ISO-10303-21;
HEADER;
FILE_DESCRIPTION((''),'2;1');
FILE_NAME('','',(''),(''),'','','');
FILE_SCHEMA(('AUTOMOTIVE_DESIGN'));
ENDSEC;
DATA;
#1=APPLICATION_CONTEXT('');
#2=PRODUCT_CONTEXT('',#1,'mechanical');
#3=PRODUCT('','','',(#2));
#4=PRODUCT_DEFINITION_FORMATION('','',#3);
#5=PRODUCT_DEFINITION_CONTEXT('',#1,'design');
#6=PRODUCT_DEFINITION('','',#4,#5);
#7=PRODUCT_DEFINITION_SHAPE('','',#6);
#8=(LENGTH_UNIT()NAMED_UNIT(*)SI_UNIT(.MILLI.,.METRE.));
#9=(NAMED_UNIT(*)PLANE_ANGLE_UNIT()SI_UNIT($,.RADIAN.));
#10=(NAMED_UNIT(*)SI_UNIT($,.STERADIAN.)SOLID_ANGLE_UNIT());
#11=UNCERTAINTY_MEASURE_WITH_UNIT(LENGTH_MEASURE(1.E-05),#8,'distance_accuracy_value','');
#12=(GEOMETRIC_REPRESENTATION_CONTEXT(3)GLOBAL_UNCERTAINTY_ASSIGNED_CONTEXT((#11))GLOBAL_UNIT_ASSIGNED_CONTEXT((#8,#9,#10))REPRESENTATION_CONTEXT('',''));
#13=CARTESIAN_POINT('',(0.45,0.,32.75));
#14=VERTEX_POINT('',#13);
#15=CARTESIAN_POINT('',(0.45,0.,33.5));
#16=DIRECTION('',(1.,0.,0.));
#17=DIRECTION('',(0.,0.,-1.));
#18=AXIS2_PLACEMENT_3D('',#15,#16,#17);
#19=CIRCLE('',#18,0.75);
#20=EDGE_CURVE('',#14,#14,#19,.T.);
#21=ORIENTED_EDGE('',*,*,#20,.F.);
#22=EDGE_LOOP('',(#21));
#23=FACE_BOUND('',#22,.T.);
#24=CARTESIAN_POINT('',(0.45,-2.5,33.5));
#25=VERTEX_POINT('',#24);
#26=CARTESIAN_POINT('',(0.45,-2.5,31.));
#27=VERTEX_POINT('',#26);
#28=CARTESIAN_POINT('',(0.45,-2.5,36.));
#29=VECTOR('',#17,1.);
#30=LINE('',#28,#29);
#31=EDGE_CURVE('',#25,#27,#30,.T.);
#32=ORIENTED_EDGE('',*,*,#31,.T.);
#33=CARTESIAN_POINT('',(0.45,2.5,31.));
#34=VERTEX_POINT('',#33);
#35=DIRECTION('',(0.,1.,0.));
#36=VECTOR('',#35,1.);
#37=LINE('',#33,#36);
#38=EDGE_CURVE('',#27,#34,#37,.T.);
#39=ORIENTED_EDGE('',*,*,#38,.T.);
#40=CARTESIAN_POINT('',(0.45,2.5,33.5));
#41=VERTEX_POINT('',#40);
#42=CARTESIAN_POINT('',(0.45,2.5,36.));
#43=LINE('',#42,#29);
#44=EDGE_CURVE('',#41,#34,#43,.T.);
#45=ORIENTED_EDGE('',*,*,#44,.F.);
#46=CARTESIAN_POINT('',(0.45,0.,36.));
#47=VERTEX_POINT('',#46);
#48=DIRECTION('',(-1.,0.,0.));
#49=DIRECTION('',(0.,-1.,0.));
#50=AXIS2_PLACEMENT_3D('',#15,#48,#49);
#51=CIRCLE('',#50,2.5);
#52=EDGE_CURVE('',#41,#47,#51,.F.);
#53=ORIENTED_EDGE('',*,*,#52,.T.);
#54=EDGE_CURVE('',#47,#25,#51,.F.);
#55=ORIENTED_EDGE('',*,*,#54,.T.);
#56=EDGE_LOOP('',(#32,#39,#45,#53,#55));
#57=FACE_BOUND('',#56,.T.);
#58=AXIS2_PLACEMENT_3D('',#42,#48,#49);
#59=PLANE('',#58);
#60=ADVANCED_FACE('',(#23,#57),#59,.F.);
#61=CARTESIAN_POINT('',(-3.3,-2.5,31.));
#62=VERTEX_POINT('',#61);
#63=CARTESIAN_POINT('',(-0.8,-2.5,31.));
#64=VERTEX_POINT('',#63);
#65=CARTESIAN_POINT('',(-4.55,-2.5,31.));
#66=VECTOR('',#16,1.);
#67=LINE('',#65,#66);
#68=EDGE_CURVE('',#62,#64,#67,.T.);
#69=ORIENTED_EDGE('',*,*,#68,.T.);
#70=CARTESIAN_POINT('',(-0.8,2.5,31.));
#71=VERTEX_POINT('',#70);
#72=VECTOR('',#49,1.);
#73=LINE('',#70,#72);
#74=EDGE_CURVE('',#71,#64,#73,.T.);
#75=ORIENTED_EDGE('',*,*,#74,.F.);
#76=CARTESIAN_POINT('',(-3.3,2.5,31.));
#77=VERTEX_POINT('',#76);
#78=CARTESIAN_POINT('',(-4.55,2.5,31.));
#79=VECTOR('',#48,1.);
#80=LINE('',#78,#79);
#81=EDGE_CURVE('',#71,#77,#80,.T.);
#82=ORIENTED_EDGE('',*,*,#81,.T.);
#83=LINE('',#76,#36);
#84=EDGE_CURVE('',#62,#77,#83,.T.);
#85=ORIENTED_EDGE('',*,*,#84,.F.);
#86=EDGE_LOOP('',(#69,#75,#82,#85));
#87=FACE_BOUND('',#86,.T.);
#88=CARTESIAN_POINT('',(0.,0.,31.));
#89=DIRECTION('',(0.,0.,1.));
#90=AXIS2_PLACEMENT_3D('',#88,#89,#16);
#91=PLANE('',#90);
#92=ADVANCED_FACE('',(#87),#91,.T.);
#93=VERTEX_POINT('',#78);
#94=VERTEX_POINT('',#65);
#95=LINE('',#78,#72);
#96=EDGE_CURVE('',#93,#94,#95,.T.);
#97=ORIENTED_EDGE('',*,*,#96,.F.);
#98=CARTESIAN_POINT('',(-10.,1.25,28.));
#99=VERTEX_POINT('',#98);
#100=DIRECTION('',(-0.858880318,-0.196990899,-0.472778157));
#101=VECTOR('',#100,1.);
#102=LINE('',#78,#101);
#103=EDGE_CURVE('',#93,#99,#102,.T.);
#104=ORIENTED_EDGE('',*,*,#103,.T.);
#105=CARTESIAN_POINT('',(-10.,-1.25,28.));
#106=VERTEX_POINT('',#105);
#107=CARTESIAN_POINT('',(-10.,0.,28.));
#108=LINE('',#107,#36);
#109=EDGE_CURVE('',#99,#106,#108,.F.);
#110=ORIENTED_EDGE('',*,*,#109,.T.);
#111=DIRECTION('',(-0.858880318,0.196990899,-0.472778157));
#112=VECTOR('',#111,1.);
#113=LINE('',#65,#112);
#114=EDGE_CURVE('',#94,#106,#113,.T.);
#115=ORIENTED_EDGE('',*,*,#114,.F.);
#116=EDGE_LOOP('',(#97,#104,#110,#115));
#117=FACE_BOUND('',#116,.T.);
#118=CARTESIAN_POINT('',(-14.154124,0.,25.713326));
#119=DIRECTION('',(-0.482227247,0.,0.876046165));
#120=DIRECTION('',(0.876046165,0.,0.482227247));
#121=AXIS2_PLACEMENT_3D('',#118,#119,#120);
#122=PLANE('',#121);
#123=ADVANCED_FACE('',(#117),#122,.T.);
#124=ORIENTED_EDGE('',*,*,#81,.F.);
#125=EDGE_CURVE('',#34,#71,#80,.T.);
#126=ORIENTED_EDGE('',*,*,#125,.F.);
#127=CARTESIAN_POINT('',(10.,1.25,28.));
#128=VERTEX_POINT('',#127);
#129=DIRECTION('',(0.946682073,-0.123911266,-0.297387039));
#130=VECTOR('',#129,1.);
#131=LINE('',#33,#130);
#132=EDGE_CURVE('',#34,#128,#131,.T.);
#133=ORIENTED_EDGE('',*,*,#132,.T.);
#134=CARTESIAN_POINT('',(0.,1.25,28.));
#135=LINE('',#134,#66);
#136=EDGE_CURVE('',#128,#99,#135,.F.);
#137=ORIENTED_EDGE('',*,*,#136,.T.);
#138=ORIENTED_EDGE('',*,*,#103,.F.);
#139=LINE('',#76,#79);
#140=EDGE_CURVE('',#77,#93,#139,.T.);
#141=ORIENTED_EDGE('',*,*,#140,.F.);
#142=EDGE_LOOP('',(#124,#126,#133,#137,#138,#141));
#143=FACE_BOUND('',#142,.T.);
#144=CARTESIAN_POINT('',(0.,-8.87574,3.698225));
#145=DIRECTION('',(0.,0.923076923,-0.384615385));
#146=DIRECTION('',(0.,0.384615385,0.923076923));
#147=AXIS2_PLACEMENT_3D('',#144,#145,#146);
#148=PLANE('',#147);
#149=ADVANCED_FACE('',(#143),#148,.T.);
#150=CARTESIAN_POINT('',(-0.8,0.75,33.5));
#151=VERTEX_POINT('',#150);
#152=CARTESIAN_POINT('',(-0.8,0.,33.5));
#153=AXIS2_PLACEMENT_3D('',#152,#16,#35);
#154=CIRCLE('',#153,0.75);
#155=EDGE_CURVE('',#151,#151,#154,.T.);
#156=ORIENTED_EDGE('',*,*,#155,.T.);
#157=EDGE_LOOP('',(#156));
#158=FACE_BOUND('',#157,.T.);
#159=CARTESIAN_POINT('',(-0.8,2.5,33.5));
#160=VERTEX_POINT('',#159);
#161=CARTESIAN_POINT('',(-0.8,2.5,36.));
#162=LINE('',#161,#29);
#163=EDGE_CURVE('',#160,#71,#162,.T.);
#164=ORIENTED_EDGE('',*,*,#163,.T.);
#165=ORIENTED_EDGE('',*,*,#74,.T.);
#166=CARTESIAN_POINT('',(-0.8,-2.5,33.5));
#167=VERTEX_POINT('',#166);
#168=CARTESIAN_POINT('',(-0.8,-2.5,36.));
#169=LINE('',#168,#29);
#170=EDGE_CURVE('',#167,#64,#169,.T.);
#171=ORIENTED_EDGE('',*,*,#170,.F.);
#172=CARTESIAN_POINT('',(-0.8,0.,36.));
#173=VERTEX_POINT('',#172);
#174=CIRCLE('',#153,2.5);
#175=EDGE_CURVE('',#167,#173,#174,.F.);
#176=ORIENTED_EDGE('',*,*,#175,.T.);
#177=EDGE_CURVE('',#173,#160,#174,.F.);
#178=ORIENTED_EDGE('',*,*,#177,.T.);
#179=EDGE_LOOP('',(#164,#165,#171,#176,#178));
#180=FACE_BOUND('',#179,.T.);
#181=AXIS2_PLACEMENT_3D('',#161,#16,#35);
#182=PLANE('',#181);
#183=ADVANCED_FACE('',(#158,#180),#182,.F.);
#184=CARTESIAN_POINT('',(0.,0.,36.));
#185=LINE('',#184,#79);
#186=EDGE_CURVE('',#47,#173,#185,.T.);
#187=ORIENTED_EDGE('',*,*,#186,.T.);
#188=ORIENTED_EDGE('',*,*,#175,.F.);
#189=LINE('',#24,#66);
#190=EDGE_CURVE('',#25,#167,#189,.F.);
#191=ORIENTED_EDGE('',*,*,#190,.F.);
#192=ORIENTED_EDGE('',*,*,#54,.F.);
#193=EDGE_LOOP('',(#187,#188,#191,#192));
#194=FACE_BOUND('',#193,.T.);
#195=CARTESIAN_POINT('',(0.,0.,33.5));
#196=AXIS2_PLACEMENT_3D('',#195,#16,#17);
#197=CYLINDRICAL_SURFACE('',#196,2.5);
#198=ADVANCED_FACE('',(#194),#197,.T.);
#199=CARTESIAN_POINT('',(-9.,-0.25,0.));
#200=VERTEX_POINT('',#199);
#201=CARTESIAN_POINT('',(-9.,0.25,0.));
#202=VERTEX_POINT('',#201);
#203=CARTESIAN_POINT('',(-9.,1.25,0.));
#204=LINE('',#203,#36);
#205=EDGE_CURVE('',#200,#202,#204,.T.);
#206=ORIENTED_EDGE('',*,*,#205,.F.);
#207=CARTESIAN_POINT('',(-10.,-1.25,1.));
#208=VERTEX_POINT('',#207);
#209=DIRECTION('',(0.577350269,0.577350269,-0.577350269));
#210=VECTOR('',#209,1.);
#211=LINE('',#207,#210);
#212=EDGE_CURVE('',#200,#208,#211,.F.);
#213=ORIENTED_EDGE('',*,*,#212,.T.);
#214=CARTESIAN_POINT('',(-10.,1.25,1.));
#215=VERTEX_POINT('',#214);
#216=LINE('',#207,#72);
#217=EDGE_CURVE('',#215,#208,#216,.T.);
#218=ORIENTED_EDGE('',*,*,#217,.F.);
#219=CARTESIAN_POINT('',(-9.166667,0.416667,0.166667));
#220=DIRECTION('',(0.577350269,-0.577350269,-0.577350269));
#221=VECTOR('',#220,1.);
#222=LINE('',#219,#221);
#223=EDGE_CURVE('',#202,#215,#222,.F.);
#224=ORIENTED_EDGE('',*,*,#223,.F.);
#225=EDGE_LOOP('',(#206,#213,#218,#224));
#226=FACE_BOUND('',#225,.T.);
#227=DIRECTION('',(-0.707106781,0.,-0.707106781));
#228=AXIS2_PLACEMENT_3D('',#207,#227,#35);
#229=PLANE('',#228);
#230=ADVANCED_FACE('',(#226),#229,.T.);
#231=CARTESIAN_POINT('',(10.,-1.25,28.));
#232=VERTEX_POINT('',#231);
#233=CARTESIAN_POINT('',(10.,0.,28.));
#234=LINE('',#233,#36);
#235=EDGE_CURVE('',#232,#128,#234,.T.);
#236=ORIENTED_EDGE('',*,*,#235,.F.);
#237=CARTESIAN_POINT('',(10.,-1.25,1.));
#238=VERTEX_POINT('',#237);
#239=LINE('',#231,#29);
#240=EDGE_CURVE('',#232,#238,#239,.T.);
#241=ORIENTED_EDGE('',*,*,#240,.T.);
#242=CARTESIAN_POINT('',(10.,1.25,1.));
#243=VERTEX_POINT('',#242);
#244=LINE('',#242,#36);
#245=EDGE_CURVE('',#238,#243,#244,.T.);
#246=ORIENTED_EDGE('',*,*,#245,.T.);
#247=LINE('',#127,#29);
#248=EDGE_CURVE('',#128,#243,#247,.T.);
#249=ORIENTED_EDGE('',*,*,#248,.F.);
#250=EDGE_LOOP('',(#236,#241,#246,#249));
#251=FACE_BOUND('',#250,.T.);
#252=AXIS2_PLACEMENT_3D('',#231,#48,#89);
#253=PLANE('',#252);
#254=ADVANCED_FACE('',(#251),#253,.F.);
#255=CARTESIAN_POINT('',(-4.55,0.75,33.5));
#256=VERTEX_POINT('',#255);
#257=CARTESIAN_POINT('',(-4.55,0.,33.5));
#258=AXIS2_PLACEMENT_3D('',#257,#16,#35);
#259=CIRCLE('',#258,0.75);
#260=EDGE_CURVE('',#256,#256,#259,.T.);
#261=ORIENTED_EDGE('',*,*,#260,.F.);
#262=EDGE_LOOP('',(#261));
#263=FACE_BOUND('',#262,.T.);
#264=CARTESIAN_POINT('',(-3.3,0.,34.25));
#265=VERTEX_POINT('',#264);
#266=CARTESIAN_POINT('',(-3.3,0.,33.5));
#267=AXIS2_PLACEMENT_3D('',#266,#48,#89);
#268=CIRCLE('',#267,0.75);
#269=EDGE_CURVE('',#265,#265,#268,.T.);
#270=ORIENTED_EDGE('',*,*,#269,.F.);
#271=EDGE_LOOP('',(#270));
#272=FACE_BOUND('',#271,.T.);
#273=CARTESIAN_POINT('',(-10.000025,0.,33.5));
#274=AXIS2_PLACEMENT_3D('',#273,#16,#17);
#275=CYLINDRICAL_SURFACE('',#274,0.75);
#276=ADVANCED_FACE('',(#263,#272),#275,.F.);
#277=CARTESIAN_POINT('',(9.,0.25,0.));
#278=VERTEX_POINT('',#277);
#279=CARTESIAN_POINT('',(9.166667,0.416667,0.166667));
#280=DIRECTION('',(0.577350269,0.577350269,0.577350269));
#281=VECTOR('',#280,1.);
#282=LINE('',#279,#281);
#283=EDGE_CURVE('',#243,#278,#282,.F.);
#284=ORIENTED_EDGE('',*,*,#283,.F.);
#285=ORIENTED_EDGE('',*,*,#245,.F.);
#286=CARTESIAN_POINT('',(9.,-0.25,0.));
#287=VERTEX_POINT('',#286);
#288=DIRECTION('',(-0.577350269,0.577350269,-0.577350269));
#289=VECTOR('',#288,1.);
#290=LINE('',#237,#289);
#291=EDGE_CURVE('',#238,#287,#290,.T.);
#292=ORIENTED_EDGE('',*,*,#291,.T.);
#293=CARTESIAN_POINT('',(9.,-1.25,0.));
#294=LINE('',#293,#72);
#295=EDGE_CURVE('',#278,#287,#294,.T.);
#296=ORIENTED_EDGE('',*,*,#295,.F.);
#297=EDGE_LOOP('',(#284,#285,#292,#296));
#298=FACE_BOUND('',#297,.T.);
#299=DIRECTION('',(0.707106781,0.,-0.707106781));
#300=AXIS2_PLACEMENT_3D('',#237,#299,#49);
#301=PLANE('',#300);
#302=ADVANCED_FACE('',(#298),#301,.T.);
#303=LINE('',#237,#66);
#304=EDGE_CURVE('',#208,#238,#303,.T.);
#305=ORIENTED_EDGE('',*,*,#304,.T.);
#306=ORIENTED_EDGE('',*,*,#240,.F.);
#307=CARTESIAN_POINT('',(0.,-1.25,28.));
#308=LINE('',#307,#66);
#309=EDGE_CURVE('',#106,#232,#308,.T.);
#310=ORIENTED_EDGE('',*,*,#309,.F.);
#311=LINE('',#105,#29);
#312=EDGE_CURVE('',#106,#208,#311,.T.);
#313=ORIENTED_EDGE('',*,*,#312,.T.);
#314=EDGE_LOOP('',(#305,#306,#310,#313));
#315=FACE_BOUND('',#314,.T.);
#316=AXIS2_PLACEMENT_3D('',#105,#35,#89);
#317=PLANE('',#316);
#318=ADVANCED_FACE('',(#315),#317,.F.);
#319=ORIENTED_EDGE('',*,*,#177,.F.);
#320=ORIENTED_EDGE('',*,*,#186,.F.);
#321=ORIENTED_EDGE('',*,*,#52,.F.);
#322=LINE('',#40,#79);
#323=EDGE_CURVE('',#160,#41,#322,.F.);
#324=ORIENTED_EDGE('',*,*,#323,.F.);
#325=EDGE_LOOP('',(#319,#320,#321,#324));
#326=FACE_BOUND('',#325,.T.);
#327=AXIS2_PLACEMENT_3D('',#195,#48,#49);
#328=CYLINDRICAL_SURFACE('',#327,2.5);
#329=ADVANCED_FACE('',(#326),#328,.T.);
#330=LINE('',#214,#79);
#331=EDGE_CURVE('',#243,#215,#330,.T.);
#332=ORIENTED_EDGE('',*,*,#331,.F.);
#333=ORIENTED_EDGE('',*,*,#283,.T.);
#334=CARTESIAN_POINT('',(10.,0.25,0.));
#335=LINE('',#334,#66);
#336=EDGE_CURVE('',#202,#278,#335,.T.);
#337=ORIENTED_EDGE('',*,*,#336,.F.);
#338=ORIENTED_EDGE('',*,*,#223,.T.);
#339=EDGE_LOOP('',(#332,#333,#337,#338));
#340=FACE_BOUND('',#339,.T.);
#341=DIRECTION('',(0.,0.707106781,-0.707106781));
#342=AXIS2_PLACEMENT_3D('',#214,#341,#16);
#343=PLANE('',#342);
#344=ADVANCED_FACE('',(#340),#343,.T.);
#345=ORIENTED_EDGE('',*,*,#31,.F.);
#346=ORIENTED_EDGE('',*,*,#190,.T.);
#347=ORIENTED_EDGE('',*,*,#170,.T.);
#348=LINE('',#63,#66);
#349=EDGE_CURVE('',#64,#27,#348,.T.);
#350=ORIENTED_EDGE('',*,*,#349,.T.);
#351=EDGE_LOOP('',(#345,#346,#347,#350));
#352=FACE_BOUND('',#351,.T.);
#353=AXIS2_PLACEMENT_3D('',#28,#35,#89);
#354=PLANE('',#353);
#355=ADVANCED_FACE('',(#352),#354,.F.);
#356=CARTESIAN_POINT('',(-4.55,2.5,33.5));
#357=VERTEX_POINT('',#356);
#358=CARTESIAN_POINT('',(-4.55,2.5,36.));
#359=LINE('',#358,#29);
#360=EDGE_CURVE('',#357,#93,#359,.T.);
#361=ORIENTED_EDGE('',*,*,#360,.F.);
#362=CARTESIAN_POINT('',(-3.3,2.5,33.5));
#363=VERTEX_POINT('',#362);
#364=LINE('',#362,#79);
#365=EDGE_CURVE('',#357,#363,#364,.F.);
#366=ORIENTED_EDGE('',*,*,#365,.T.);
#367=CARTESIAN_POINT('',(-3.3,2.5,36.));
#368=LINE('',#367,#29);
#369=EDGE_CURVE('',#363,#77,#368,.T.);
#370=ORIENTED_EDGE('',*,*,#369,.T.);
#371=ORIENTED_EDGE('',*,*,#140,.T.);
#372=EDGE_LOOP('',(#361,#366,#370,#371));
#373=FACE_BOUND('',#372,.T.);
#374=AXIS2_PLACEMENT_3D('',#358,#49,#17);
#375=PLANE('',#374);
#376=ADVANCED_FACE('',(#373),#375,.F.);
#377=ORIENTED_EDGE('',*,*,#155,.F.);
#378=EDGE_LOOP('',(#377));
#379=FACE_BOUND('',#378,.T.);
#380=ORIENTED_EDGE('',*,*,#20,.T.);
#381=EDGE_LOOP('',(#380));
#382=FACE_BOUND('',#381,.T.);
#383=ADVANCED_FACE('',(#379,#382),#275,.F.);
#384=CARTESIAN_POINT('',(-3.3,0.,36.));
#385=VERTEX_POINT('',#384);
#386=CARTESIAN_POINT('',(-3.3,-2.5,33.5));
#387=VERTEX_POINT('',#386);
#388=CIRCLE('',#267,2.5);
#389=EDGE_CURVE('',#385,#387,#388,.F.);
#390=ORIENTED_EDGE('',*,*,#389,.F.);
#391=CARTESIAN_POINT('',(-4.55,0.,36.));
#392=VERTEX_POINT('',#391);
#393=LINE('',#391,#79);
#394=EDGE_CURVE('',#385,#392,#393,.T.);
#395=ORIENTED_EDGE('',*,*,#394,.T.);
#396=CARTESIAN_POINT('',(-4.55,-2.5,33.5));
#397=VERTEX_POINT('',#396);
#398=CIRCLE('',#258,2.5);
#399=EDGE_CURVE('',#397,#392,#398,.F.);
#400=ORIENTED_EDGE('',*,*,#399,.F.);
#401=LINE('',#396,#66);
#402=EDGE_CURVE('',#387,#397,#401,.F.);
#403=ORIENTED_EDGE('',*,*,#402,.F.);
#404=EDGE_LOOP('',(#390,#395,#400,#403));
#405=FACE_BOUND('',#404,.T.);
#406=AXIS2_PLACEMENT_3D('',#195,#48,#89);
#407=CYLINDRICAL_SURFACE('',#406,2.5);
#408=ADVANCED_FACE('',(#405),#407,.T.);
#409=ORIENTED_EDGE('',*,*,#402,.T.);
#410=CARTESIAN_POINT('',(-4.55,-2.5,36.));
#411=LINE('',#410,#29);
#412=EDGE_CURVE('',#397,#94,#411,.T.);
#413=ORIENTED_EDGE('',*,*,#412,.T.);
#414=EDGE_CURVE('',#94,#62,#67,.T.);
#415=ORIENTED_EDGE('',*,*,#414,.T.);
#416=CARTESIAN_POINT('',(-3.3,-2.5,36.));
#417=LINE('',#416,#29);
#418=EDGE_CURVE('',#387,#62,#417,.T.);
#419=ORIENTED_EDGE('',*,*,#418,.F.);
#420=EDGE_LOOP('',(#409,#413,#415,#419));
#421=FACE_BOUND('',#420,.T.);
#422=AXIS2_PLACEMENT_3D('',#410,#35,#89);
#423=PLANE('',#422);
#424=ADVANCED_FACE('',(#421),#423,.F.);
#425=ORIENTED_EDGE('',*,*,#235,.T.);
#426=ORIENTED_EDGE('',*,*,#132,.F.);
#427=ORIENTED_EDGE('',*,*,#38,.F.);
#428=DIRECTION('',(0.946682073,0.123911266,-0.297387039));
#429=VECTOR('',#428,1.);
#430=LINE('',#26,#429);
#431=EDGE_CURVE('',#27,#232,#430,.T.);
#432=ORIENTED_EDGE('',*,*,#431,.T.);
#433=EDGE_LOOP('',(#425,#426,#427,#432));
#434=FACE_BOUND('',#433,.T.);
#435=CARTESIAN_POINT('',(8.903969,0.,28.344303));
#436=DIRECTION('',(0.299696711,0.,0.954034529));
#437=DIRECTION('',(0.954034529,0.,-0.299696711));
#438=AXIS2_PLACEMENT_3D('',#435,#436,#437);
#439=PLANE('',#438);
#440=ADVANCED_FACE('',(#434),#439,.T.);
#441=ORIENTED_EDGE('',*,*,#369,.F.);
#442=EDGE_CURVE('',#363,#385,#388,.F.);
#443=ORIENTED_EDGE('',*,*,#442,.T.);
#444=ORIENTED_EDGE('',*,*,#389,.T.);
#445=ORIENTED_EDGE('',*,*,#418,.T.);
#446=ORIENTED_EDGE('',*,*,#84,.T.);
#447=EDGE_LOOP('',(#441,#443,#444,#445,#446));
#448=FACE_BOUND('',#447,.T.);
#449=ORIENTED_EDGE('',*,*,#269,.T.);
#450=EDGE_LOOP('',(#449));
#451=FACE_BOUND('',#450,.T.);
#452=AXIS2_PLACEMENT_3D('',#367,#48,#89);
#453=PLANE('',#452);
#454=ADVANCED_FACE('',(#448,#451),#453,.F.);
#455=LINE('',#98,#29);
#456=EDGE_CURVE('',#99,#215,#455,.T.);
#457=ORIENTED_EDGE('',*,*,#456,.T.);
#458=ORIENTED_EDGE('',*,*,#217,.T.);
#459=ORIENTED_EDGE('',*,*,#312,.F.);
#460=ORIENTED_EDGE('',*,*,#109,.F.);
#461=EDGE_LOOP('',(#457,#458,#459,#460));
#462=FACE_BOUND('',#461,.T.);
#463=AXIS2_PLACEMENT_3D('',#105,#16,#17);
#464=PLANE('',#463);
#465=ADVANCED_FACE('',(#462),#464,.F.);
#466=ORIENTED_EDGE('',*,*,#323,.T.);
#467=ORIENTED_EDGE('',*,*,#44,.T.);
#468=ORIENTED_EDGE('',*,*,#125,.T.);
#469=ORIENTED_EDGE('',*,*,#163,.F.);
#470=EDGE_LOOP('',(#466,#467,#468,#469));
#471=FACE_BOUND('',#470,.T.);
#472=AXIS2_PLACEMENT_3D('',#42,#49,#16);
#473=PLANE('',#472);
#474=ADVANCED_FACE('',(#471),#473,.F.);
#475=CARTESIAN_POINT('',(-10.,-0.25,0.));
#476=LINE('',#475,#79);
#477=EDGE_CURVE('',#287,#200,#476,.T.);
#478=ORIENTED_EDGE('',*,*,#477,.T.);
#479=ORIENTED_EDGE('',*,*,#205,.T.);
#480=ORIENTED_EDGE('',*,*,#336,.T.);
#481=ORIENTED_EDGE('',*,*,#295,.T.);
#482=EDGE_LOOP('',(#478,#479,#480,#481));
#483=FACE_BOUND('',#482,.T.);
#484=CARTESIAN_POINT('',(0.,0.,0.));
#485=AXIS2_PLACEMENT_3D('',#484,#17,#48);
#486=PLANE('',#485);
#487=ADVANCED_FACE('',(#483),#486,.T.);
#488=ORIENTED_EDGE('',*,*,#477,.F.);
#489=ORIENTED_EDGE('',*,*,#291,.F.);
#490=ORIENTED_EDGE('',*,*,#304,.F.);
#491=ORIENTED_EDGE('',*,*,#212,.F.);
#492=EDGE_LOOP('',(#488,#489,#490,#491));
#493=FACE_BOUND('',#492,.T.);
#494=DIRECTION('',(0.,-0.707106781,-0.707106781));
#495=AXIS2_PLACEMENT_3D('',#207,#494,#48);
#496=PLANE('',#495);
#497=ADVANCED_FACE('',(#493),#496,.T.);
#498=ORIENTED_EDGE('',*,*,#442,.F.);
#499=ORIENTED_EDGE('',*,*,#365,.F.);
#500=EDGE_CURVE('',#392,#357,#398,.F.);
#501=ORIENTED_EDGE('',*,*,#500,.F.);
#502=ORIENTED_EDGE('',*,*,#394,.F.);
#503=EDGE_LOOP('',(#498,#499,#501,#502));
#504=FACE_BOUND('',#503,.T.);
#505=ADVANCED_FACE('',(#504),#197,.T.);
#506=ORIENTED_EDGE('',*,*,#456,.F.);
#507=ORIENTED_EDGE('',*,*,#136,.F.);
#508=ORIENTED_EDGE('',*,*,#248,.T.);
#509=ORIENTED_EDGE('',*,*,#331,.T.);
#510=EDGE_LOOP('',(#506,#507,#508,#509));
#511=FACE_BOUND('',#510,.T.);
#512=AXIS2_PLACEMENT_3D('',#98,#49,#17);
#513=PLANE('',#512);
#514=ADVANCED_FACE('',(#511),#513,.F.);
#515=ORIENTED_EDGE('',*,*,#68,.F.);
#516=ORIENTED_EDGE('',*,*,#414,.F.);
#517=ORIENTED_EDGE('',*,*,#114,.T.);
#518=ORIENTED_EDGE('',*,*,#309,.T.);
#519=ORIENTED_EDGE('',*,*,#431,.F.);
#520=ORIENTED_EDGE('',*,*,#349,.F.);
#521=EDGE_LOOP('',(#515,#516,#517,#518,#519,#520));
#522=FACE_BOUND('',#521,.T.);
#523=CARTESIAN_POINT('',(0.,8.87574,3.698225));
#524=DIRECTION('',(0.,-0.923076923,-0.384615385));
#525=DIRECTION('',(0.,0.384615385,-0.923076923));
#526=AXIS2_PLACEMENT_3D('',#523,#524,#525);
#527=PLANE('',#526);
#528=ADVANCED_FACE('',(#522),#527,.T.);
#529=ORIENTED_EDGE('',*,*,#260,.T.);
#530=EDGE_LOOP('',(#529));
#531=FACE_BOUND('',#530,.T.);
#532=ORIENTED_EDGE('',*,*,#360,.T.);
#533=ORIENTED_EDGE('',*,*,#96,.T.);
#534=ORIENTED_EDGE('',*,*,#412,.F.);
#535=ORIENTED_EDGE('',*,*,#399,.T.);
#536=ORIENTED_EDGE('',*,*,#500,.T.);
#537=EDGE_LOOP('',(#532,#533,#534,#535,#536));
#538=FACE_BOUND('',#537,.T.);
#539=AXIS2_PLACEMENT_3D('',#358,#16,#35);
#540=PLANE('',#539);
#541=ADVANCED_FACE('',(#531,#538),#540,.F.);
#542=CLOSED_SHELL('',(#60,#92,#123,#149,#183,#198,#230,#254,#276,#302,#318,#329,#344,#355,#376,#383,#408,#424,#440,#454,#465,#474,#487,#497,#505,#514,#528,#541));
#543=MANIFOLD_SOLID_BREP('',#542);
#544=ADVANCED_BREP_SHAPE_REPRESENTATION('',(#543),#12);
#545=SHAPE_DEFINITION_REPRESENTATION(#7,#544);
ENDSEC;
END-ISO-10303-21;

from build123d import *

# Parameters (mm, degrees)
SKETCH1_W           = 20
SKETCH1_H           = 2.5
BOSS_EXTRUDE1_DEPTH = 28
SKETCH7_W           = 1.25
SKETCH7_H           = 5
BOSS_EXTRUDE3_DEPTH = 5
FILLET1_R           = 2.5
SKETCH8_R           = 0.75
CUT_EXTRUDE3_DEPTH  = 38.569302663
CHAMFER1_SIZE       = 1


with BuildPart() as part:
    # Sketch1 → Boss-Extrude1 (new body)
    with BuildSketch(Plane.XY):
        Rectangle(SKETCH1_W, SKETCH1_H)
    extrude(amount=BOSS_EXTRUDE1_DEPTH)

    # Sketch3 → section 0 of loft1
    with BuildSketch(Plane.XY.offset(31), mode=Mode.PRIVATE) as loft1_s0:
        with BuildLine():
            Line((-4.55, 2.5), (0.45, 2.5))
            Line((0.45, 2.5), (0.45, -2.5))
            Line((0.45, -2.5), (-4.55, -2.5))
            Line((-4.55, -2.5), (-4.55, 2.5))
        make_face()
    # loft up to a face of the part (loft1)
    loft([loft1_s0.sketch, part.faces().sort_by_distance((0, 0, 28))[0]])

    # Sketch7 → Boss-Extrude3 (add)
    with BuildSketch(Plane.XY.offset(31)):
        with Locations((-3.925, 0)):
            Rectangle(SKETCH7_W, SKETCH7_H)
        with Locations((-0.175, 0)):
            Rectangle(SKETCH7_W, SKETCH7_H)
    extrude(amount=BOSS_EXTRUDE3_DEPTH)

    # Fillet1
    fillet1_edges = [part.edges().sort_by_distance(p)[0] for p in [
        (-0.175, -2.5, 36),
        (-3.925, -2.5, 36),
        (-3.925, 2.5, 36),
        (-0.175, 2.5, 36),
    ]]
    fillet(fillet1_edges, radius=FILLET1_R - 0.0001)  # a hair under: the kernel refuses the full size

    # Sketch8 → Cut-Extrude3 (cut, through all)
    with BuildSketch(Plane(origin=(0.45, 0, 0), x_dir=(0, 0, -1), z_dir=(1, 0, 0))):
        with Locations((-33.5, 0)):
            Circle(SKETCH8_R)
    extrude(amount=-CUT_EXTRUDE3_DEPTH, mode=Mode.SUBTRACT)

    # Chamfer1
    chamfer1_edges = [part.edges().sort_by_distance(p)[0] for p in [
        (0, -1.25, 0),
        (-10, 0, 0),
        (0, 1.25, 0),
        (10, 0, 0),
    ]]
    chamfer(chamfer1_edges, length=CHAMFER1_SIZE)


solid = part.part
